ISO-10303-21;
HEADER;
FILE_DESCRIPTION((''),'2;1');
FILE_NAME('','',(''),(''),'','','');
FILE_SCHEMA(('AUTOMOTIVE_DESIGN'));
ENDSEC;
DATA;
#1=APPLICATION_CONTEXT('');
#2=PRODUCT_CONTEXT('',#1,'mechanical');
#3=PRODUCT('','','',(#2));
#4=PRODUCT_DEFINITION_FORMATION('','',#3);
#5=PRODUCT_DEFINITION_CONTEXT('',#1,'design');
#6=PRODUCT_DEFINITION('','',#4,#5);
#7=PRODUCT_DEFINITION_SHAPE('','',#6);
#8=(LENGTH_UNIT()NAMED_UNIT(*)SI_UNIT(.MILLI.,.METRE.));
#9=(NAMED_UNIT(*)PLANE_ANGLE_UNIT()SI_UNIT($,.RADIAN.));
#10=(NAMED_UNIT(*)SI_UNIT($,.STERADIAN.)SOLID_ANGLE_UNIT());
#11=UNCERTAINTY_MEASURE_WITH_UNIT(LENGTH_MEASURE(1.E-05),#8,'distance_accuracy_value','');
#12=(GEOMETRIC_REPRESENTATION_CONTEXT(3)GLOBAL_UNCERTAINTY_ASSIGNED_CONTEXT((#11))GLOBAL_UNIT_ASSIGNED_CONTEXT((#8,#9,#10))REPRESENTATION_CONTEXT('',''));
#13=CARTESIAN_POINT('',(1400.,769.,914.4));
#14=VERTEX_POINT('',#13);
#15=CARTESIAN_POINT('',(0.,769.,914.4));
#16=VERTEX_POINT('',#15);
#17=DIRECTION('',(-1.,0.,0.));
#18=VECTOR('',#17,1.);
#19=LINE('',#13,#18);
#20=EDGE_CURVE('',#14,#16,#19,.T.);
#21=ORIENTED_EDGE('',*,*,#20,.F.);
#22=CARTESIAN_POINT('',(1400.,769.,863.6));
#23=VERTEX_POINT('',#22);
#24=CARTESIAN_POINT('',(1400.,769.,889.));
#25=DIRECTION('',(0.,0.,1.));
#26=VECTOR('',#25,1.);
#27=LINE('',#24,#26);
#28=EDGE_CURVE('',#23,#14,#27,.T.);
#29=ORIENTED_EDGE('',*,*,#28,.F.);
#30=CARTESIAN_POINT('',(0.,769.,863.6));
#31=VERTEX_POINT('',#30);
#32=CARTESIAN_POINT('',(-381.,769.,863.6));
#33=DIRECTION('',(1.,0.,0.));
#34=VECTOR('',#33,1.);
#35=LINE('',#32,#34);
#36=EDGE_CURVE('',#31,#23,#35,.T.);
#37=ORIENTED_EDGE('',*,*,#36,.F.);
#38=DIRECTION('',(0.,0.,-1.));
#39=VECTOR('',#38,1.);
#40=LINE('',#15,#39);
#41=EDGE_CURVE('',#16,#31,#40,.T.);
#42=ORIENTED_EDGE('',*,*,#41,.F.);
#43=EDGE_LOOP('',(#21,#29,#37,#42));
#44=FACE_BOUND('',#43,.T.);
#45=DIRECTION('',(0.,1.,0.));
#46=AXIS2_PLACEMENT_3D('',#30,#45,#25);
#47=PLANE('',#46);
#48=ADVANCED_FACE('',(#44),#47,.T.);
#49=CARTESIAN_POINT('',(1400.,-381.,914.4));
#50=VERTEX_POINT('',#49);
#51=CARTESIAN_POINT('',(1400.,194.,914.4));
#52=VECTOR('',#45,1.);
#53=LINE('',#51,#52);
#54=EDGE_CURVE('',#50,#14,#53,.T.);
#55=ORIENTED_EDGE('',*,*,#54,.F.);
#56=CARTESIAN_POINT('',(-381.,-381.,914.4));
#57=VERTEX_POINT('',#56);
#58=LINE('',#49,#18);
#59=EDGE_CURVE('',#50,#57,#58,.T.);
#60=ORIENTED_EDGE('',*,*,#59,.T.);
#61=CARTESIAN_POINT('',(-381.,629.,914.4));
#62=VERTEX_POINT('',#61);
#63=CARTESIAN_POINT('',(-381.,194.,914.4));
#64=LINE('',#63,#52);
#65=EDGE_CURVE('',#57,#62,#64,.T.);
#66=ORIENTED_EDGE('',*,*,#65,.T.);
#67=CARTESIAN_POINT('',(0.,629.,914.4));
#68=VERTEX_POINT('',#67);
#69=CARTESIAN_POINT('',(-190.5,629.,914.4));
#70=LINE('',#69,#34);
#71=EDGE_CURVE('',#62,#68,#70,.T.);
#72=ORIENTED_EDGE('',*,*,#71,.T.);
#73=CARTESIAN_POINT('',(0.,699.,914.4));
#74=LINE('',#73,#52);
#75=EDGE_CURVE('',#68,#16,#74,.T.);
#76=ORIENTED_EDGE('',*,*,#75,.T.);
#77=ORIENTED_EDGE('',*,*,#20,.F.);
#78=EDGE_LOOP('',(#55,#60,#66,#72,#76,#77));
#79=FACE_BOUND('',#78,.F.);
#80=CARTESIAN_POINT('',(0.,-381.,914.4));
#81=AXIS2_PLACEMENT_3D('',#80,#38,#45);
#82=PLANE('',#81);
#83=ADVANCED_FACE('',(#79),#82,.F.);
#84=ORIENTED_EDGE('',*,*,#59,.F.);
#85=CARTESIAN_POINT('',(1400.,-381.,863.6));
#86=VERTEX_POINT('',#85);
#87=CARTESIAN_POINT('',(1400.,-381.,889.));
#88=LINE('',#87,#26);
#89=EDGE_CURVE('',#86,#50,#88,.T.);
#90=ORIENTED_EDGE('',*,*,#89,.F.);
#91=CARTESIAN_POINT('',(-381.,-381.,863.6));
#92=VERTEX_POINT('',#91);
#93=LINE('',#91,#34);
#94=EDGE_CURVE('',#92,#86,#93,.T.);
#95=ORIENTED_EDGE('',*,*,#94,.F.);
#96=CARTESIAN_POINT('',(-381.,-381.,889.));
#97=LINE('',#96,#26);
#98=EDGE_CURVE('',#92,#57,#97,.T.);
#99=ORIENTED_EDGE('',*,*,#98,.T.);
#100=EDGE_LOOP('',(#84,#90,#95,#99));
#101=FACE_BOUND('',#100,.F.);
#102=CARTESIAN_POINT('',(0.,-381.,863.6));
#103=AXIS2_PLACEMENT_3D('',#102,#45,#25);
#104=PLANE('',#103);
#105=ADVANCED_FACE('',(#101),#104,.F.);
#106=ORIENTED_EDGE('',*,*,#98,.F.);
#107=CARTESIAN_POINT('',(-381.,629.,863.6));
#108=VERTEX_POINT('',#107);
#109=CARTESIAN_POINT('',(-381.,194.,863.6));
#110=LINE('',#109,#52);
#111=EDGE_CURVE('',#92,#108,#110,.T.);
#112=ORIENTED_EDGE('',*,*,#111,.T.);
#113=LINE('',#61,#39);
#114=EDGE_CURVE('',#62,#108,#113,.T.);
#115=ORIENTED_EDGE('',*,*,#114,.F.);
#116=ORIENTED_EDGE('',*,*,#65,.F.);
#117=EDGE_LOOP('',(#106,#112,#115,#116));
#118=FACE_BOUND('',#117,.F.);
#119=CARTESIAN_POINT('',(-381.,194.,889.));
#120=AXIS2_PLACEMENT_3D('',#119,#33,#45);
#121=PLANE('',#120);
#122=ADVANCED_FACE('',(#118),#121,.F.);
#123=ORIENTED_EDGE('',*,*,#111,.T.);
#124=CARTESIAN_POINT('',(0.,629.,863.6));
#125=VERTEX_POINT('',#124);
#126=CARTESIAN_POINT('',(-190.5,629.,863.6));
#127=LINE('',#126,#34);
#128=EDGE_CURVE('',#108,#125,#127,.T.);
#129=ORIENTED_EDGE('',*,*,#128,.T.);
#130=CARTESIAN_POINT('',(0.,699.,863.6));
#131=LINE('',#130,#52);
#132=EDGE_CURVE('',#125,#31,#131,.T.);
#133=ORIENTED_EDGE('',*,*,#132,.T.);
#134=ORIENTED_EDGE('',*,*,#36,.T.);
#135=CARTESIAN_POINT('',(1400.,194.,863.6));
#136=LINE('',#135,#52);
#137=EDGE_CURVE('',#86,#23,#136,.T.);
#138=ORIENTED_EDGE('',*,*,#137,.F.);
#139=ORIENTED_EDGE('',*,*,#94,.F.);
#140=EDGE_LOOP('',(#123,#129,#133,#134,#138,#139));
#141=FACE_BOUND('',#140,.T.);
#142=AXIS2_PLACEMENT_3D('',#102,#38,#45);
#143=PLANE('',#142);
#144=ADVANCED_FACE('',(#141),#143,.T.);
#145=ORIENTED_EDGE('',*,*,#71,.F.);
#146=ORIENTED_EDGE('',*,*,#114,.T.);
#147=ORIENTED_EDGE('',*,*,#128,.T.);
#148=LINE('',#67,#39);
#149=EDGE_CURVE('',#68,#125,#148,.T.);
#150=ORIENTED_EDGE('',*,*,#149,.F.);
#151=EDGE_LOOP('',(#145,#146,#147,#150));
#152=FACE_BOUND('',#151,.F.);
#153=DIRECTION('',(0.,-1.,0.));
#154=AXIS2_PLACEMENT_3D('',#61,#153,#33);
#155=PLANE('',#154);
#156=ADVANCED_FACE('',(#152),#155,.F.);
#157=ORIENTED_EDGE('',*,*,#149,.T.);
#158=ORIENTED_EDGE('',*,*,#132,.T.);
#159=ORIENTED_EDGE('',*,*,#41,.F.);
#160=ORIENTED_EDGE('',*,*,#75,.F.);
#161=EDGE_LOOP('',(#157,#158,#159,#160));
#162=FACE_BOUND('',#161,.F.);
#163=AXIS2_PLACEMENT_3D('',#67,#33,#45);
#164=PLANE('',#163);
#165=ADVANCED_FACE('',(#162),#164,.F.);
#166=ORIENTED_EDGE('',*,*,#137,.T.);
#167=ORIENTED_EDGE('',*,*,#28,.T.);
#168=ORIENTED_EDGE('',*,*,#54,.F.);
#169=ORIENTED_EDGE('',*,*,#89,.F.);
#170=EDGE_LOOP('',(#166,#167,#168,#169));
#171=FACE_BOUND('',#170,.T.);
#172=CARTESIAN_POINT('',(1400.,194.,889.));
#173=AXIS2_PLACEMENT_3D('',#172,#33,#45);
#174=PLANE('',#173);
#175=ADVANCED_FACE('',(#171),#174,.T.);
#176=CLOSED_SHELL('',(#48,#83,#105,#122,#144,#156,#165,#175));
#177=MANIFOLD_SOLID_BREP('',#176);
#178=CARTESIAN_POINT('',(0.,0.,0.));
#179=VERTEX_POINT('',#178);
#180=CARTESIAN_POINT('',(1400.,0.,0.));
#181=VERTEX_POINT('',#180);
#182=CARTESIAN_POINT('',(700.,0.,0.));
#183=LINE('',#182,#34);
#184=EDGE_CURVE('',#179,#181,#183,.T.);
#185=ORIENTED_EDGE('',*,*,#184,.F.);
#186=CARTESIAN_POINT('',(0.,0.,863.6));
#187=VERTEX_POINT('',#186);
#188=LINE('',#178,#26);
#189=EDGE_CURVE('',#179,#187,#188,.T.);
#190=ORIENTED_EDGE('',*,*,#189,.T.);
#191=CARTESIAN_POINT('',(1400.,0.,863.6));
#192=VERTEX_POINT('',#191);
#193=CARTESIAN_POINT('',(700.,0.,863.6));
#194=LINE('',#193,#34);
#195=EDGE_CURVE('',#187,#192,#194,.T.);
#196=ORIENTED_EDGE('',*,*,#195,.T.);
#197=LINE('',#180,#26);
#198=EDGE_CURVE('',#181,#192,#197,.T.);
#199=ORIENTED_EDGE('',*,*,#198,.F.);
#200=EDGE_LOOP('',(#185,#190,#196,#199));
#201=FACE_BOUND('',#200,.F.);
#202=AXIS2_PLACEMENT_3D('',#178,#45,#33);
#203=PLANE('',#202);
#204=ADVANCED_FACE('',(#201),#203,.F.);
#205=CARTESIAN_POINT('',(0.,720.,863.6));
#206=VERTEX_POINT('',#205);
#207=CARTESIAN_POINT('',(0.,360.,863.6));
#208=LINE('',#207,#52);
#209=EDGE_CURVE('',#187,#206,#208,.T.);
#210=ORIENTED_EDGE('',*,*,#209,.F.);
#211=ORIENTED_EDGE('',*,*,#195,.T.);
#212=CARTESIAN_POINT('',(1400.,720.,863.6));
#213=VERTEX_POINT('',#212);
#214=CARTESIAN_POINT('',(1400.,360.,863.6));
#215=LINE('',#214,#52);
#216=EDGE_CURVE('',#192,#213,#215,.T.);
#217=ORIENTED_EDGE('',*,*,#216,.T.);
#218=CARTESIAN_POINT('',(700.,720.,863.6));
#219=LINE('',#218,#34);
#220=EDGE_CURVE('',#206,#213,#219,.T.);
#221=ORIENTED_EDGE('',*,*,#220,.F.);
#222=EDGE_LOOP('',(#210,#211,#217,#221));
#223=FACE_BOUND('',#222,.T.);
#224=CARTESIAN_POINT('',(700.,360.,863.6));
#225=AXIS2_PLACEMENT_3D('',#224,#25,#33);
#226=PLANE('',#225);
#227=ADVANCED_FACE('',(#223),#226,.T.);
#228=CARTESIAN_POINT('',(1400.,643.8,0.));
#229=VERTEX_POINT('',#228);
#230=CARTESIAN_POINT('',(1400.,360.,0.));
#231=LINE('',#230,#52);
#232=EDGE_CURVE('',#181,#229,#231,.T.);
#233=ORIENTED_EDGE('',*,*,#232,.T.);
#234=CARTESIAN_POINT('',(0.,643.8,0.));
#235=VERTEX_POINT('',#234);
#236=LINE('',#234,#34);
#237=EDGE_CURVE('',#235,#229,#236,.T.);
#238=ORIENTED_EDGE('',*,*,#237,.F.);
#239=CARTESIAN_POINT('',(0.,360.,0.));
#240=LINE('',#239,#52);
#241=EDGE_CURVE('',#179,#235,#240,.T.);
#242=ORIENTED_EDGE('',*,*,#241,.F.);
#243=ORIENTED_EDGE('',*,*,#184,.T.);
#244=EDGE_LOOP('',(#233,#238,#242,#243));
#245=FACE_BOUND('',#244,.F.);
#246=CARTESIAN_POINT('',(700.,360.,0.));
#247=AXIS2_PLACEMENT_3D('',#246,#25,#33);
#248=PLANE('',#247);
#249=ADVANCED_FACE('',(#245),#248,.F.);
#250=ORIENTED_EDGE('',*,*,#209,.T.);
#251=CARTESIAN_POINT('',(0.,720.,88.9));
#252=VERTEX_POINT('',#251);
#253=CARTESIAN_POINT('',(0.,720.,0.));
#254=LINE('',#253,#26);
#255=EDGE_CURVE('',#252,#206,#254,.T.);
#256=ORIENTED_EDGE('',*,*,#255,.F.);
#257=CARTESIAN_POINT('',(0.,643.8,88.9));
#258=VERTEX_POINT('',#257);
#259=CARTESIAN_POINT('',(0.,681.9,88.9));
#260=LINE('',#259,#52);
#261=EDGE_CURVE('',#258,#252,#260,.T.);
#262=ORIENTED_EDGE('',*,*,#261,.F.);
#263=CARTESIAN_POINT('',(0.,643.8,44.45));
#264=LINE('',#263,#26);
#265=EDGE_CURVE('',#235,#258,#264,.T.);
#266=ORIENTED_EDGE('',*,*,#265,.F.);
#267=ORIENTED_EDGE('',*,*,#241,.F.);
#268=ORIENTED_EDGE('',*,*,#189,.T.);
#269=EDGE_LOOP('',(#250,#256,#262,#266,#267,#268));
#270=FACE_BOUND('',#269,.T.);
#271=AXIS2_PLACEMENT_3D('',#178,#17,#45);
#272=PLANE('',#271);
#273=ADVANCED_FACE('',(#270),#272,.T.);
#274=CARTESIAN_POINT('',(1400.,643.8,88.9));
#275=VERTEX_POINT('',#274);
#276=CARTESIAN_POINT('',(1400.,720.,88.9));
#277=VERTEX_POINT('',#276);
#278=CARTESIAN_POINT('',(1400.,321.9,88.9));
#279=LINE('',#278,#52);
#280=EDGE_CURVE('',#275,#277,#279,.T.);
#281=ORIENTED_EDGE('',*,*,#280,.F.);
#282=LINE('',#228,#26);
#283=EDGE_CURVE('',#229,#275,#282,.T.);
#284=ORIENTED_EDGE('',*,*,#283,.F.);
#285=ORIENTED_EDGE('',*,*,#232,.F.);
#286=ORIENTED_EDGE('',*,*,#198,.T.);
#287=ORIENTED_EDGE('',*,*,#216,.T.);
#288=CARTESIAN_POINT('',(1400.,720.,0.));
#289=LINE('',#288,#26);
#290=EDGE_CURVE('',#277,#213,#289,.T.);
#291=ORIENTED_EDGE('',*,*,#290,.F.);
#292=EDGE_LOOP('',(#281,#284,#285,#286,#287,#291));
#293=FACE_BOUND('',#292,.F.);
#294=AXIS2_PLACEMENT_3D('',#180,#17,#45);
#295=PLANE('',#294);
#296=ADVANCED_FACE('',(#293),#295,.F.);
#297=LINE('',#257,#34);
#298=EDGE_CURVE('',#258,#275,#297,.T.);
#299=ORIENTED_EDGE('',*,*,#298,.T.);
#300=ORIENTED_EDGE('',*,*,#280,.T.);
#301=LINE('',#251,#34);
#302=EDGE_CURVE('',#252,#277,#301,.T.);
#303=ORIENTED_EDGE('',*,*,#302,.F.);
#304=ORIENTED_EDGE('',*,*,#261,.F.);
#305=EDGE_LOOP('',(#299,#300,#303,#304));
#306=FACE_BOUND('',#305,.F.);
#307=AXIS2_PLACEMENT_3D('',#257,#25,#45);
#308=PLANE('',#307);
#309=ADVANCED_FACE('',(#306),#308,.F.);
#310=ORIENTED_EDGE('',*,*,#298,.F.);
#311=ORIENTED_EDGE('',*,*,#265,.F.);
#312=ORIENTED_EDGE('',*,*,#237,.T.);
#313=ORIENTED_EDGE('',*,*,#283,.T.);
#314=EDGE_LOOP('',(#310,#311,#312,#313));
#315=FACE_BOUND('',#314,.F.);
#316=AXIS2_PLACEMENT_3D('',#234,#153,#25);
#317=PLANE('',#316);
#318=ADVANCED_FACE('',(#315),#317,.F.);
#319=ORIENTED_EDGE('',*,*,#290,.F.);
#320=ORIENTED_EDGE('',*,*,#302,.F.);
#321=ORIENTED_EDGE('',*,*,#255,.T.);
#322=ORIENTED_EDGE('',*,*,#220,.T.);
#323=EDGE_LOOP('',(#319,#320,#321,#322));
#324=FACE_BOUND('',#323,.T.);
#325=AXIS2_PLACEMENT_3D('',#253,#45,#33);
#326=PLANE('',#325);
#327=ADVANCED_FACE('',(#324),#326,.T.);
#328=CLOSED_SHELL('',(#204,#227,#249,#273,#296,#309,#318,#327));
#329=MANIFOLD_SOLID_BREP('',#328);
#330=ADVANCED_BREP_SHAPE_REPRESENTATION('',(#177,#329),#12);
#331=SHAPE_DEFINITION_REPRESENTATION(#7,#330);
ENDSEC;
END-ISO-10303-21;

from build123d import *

# Parameters (mm, degrees)
F0_W     = 1400
F0_H     = 720
F1_DEPTH = 863.6
F2_W     = 76.2
F2_H     = 88.9
F3_DEPTH = 1400.001
F4_W     = 1150
F4_H     = 50.8
F5_DEPTH = 1400
F6_DEPTH = 381
F7_W     = 381
F7_H     = 140
F8_DEPTH = 50.8


with BuildPart() as f1:
    # F0 (on Top) → F1 (new body)
    with BuildSketch(Plane.XY):
        with Locations((700, 360)):
            Rectangle(F0_W, F0_H)
    extrude(amount=F1_DEPTH)

    # F2 (on Right) → F3 (cut, through all)
    with BuildSketch(Plane.YZ):
        with Locations((681.9, 44.45)):
            Rectangle(F2_W, F2_H)
    extrude(amount=F3_DEPTH, mode=Mode.SUBTRACT)


with BuildPart() as f5:
    # F4 (on Right) → F5 (new body, through all)
    with BuildSketch(Plane.YZ):
        with Locations((194, 889)):
            Rectangle(F4_W, F4_H)
    extrude(amount=F5_DEPTH)

    # F6 (add): a face of the model
    f6_faces = [f5.faces().sort_by_distance(p)[0] for p in [
        (0, 194, 889),
    ]]
    extrude(f6_faces, amount=F6_DEPTH)

    # F7 (on face) → F8 (cut, through all)
    with BuildSketch(Plane.XY.offset(914.4)):
        with Locations((-190.5, 699)):
            Rectangle(F7_W, F7_H)
    extrude(amount=-F8_DEPTH, mode=Mode.SUBTRACT)


solid = Compound([f1.part, f5.part])
